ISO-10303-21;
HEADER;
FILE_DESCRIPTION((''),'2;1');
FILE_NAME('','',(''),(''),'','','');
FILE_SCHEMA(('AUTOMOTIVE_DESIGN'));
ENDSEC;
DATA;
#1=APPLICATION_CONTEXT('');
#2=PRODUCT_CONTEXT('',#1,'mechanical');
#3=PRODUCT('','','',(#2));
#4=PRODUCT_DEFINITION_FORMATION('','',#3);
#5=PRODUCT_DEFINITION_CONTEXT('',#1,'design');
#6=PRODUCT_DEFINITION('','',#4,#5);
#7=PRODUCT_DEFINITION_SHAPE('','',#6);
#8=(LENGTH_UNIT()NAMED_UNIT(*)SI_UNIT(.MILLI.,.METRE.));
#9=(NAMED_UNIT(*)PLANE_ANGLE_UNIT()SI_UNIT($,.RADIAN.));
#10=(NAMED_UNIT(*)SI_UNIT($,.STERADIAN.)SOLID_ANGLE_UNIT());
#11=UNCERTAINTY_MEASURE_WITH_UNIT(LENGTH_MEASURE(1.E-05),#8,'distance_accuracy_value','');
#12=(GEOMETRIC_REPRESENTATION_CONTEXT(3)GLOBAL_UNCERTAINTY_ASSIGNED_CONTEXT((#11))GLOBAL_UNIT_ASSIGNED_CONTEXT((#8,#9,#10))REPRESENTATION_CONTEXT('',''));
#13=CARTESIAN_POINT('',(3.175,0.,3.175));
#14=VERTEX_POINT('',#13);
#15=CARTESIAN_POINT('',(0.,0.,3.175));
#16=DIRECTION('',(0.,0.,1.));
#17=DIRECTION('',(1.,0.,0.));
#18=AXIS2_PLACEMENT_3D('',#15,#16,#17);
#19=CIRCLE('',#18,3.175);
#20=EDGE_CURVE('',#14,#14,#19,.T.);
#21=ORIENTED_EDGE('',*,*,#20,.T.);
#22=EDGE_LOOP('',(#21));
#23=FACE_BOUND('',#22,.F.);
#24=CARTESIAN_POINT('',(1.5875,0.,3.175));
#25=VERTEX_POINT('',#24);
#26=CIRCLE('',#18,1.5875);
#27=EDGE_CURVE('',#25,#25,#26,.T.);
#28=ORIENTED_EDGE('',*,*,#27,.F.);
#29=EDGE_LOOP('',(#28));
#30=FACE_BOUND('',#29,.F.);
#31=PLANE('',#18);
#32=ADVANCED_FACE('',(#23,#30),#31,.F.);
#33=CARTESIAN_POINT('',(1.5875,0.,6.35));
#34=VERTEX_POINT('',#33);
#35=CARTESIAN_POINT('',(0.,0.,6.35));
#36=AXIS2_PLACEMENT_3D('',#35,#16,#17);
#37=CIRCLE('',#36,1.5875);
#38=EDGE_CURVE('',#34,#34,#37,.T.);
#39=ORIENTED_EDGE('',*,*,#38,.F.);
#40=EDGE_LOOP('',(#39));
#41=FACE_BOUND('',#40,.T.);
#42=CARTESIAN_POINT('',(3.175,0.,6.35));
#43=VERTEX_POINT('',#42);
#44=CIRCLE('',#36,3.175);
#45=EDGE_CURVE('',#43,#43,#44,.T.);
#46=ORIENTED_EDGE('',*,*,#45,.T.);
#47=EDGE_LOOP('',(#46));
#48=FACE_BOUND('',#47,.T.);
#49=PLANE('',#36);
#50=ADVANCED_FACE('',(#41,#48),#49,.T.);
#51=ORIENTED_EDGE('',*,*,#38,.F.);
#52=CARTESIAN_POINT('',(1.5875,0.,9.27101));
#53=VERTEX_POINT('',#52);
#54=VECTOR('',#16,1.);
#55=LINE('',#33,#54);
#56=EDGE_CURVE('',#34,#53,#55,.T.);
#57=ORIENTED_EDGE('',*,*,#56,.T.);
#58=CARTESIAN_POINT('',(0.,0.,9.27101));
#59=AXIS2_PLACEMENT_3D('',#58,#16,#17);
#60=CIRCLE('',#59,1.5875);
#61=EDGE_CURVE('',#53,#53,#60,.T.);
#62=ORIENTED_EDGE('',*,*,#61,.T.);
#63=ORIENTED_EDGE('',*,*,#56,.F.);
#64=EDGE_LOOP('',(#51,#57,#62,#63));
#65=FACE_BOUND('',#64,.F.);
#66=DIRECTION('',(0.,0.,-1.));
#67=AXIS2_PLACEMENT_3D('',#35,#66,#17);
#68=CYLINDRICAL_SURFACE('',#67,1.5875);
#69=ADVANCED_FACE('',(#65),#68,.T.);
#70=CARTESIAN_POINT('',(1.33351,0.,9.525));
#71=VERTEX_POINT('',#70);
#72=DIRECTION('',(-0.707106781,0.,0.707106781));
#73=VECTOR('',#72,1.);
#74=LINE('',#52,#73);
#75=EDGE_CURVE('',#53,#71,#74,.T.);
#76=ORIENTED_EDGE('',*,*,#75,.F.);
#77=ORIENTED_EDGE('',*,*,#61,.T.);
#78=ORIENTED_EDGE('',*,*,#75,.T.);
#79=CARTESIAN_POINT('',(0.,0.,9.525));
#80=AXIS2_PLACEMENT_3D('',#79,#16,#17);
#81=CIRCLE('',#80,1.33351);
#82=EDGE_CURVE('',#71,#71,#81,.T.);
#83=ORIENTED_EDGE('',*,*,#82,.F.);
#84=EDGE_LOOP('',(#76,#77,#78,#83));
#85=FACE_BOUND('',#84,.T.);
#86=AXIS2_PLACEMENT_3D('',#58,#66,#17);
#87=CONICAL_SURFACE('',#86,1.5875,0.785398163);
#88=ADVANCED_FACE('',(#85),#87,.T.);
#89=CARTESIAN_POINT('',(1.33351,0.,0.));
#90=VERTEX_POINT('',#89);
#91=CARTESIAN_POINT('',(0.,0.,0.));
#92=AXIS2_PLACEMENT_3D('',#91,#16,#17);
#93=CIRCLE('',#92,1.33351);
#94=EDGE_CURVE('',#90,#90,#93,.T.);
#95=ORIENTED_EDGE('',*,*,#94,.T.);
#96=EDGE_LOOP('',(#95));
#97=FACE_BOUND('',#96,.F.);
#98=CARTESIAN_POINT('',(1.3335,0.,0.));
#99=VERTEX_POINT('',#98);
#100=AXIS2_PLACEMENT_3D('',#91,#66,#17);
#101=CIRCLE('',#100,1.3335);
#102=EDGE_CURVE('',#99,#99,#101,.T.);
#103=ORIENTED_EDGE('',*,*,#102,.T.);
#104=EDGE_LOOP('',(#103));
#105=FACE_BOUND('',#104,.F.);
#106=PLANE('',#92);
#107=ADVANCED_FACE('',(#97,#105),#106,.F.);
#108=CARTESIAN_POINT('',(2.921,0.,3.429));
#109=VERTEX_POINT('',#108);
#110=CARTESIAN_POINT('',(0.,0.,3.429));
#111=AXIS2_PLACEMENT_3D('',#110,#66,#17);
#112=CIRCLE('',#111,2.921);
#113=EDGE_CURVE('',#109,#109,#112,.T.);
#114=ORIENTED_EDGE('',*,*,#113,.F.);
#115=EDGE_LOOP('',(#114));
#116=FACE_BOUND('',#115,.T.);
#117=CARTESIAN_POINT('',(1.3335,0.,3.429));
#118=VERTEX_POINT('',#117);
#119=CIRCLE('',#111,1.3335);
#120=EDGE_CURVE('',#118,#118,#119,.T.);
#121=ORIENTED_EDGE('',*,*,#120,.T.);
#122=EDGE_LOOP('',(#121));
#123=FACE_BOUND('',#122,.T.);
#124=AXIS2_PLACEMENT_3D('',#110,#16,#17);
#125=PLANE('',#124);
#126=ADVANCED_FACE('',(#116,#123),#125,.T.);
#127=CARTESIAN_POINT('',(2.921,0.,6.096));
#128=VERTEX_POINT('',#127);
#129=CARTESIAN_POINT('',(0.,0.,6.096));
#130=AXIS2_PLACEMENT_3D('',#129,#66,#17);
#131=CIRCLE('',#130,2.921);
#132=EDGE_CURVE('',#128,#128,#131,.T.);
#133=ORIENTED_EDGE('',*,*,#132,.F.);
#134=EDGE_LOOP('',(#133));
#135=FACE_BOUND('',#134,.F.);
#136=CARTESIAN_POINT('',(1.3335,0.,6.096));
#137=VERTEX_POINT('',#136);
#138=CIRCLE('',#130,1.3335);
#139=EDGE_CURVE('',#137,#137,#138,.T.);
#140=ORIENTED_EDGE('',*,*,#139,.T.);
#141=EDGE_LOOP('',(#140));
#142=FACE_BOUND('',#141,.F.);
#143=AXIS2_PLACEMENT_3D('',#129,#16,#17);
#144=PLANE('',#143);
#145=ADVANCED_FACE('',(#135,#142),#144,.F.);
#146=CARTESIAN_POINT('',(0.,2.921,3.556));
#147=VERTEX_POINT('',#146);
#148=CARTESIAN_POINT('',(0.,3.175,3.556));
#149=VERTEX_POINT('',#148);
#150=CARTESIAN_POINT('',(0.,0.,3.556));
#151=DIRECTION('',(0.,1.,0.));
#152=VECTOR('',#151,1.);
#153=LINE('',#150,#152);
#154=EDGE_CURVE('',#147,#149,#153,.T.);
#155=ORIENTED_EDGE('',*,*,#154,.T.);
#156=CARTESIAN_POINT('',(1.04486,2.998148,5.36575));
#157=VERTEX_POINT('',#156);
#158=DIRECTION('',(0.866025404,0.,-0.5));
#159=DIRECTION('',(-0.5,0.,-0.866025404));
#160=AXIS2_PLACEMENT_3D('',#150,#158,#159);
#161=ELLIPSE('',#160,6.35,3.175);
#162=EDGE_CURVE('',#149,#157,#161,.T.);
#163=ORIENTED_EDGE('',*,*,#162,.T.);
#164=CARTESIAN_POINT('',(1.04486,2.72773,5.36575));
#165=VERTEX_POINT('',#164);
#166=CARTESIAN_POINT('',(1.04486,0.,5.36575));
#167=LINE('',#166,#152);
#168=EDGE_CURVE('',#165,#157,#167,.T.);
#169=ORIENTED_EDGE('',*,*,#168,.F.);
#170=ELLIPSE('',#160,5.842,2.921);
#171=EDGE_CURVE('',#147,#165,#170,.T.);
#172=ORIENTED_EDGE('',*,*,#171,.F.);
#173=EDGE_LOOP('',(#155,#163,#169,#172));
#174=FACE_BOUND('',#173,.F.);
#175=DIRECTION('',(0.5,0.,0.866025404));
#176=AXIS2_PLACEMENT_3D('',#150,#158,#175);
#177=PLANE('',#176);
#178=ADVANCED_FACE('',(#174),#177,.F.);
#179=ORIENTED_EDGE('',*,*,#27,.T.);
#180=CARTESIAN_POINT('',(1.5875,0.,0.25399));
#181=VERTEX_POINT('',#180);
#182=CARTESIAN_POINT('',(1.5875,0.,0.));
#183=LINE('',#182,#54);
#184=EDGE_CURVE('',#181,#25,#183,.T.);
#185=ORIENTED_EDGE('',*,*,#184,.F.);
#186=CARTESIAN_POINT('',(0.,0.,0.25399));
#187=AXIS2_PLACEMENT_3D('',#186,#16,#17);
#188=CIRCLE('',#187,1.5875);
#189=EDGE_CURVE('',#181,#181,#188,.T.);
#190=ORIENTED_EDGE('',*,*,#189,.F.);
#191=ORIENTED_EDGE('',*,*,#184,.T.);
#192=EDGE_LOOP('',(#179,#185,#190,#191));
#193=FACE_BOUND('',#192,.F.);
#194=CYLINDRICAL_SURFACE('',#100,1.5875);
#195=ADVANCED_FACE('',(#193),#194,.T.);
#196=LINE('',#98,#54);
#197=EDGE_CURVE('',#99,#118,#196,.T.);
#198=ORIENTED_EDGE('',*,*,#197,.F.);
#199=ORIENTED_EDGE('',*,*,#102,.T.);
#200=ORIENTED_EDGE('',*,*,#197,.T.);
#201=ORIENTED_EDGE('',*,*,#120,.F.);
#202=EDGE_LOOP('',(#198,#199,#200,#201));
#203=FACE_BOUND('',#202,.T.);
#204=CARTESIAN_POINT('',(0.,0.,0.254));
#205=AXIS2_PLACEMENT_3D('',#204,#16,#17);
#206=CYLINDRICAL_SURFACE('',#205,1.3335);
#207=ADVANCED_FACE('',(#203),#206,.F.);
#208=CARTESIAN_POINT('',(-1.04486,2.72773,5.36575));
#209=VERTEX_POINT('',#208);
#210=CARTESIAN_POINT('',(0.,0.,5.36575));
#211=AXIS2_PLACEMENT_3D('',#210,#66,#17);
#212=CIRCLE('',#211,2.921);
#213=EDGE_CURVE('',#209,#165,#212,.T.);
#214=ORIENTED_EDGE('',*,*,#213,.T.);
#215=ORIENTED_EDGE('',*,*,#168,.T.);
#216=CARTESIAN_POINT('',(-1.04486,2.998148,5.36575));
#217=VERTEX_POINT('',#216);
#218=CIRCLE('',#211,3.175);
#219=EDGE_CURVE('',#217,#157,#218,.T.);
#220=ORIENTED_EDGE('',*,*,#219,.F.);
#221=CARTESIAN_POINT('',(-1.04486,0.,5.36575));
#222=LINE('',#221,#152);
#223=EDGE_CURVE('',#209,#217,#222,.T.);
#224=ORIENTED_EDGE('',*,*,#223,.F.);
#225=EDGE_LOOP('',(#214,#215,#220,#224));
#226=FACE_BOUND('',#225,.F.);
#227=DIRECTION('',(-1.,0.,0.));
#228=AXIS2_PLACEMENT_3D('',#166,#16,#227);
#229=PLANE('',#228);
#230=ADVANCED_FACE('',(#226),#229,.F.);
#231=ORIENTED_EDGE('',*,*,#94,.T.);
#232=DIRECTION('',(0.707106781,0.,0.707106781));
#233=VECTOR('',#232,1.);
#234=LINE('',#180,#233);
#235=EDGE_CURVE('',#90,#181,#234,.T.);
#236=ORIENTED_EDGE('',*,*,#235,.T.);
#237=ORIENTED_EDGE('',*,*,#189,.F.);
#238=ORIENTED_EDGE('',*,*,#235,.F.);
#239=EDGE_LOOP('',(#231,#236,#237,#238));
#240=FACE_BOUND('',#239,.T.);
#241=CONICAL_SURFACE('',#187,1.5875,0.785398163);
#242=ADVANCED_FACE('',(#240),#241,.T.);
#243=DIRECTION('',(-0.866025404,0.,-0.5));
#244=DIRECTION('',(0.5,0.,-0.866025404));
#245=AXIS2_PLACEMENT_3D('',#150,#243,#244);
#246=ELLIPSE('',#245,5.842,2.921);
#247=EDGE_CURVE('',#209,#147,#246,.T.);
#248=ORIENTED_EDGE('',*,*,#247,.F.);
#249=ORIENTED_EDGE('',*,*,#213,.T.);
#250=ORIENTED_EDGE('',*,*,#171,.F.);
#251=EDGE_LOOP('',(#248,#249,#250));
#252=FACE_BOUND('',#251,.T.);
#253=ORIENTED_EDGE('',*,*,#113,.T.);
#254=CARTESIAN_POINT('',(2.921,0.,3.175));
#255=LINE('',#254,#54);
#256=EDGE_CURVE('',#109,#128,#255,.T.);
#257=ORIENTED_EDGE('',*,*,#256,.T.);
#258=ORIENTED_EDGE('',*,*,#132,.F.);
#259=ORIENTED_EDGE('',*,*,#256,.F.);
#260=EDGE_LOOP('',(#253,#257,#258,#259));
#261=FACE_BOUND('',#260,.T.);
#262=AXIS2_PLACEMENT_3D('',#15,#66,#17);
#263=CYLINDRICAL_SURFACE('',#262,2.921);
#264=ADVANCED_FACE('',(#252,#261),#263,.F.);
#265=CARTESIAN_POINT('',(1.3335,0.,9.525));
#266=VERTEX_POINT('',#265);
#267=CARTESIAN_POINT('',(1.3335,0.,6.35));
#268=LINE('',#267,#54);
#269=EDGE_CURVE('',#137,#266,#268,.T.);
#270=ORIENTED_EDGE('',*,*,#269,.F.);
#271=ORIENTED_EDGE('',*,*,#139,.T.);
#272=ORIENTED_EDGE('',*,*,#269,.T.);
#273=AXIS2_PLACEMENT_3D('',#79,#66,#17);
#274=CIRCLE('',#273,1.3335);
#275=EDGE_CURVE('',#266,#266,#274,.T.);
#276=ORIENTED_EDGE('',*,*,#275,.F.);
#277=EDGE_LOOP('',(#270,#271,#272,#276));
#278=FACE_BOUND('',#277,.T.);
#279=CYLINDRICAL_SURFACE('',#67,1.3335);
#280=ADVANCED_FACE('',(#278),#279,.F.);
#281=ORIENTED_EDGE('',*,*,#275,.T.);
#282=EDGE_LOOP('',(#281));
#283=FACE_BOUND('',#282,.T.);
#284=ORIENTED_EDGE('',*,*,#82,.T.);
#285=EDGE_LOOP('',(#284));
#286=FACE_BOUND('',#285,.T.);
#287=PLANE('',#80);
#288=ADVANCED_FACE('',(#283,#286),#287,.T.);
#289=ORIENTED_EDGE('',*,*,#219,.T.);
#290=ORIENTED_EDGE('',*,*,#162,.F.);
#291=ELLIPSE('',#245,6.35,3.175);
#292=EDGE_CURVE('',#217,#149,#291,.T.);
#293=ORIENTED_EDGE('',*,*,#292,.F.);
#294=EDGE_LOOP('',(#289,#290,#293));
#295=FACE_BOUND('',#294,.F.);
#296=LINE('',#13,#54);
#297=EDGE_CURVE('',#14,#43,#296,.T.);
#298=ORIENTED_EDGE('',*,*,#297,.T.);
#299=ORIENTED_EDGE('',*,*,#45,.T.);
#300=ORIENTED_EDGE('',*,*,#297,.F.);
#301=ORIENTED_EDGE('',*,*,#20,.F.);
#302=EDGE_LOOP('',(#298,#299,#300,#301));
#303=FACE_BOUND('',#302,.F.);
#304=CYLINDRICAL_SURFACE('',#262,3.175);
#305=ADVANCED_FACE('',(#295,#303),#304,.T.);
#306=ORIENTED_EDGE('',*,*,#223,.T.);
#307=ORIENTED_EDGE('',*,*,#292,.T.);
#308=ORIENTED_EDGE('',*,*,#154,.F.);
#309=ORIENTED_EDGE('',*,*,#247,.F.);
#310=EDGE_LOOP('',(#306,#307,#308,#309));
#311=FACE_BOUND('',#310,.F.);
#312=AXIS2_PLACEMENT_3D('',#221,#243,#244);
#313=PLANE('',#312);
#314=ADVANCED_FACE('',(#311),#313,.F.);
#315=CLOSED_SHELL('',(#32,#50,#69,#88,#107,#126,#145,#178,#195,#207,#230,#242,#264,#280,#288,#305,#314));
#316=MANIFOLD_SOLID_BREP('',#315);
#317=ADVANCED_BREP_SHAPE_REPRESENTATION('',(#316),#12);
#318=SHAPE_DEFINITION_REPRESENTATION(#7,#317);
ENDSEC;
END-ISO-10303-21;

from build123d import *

# Parameters (mm, degrees)
F0_R      = 1.5875
F1_DEPTH  = 3.175
F2_R      = 3.175
F3_DEPTH  = 3.175
F4_R      = 1.5875
F5_DEPTH  = 3.175
F6_T      = -0.254
F7_DEPTH  = 0.254
F8_SIZE   = 0.25399
F10_DEPTH = 4.175


# Not quite as in the source:
# - a fillet or chamfer is up to 0.001 mm smaller than in the source, because OpenCascade refuses the exact size


with BuildPart() as f1:
    # F0 (on Top) → F1 (new body)
    with BuildSketch(Plane.XY):
        Circle(F0_R)
    extrude(amount=F1_DEPTH)

    # F2 (on face) → F3 (join)
    with BuildSketch(Plane.XY.offset(3.175)):
        Circle(F2_R)
    extrude(amount=F3_DEPTH)

    # F4 (on face) → F5 (join)
    with BuildSketch(Plane.XY.offset(6.35)):
        Circle(F4_R)
    extrude(amount=F5_DEPTH)

    # F6
    f6_openings = [f1.faces().sort_by_distance(p)[0] for p in [
        (0, 0, 9.525),
    ]]
    offset(amount=F6_T, openings=f6_openings, kind=Kind.INTERSECTION)

    # F7 (cut, through all): a face of the model
    f7_faces = [f1.faces().sort_by_distance(p)[0] for p in [
        (0, 0, 0.254),
    ]]
    extrude(f7_faces, amount=-F7_DEPTH, mode=Mode.SUBTRACT)

    # F8 (size 0.254 in the source; OpenCascade refuses exactly that, so slightly less here)
    f8_edges = [f1.edges().sort_by_distance(p)[0] for p in [
        (-1.5875, 0, 9.525),
        (-1.5875, 0, 0),
    ]]
    chamfer(f8_edges, length=F8_SIZE)

    # F9 (on Front) → F10 (cut, up to face)
    with BuildSketch(Plane.XZ):
        Polygon((1.0448596497, 5.36575), (-1.0448596497, 5.36575), (0, 3.556), align=None)
    extrude(amount=-F10_DEPTH, mode=Mode.SUBTRACT)


solid = f1.part
